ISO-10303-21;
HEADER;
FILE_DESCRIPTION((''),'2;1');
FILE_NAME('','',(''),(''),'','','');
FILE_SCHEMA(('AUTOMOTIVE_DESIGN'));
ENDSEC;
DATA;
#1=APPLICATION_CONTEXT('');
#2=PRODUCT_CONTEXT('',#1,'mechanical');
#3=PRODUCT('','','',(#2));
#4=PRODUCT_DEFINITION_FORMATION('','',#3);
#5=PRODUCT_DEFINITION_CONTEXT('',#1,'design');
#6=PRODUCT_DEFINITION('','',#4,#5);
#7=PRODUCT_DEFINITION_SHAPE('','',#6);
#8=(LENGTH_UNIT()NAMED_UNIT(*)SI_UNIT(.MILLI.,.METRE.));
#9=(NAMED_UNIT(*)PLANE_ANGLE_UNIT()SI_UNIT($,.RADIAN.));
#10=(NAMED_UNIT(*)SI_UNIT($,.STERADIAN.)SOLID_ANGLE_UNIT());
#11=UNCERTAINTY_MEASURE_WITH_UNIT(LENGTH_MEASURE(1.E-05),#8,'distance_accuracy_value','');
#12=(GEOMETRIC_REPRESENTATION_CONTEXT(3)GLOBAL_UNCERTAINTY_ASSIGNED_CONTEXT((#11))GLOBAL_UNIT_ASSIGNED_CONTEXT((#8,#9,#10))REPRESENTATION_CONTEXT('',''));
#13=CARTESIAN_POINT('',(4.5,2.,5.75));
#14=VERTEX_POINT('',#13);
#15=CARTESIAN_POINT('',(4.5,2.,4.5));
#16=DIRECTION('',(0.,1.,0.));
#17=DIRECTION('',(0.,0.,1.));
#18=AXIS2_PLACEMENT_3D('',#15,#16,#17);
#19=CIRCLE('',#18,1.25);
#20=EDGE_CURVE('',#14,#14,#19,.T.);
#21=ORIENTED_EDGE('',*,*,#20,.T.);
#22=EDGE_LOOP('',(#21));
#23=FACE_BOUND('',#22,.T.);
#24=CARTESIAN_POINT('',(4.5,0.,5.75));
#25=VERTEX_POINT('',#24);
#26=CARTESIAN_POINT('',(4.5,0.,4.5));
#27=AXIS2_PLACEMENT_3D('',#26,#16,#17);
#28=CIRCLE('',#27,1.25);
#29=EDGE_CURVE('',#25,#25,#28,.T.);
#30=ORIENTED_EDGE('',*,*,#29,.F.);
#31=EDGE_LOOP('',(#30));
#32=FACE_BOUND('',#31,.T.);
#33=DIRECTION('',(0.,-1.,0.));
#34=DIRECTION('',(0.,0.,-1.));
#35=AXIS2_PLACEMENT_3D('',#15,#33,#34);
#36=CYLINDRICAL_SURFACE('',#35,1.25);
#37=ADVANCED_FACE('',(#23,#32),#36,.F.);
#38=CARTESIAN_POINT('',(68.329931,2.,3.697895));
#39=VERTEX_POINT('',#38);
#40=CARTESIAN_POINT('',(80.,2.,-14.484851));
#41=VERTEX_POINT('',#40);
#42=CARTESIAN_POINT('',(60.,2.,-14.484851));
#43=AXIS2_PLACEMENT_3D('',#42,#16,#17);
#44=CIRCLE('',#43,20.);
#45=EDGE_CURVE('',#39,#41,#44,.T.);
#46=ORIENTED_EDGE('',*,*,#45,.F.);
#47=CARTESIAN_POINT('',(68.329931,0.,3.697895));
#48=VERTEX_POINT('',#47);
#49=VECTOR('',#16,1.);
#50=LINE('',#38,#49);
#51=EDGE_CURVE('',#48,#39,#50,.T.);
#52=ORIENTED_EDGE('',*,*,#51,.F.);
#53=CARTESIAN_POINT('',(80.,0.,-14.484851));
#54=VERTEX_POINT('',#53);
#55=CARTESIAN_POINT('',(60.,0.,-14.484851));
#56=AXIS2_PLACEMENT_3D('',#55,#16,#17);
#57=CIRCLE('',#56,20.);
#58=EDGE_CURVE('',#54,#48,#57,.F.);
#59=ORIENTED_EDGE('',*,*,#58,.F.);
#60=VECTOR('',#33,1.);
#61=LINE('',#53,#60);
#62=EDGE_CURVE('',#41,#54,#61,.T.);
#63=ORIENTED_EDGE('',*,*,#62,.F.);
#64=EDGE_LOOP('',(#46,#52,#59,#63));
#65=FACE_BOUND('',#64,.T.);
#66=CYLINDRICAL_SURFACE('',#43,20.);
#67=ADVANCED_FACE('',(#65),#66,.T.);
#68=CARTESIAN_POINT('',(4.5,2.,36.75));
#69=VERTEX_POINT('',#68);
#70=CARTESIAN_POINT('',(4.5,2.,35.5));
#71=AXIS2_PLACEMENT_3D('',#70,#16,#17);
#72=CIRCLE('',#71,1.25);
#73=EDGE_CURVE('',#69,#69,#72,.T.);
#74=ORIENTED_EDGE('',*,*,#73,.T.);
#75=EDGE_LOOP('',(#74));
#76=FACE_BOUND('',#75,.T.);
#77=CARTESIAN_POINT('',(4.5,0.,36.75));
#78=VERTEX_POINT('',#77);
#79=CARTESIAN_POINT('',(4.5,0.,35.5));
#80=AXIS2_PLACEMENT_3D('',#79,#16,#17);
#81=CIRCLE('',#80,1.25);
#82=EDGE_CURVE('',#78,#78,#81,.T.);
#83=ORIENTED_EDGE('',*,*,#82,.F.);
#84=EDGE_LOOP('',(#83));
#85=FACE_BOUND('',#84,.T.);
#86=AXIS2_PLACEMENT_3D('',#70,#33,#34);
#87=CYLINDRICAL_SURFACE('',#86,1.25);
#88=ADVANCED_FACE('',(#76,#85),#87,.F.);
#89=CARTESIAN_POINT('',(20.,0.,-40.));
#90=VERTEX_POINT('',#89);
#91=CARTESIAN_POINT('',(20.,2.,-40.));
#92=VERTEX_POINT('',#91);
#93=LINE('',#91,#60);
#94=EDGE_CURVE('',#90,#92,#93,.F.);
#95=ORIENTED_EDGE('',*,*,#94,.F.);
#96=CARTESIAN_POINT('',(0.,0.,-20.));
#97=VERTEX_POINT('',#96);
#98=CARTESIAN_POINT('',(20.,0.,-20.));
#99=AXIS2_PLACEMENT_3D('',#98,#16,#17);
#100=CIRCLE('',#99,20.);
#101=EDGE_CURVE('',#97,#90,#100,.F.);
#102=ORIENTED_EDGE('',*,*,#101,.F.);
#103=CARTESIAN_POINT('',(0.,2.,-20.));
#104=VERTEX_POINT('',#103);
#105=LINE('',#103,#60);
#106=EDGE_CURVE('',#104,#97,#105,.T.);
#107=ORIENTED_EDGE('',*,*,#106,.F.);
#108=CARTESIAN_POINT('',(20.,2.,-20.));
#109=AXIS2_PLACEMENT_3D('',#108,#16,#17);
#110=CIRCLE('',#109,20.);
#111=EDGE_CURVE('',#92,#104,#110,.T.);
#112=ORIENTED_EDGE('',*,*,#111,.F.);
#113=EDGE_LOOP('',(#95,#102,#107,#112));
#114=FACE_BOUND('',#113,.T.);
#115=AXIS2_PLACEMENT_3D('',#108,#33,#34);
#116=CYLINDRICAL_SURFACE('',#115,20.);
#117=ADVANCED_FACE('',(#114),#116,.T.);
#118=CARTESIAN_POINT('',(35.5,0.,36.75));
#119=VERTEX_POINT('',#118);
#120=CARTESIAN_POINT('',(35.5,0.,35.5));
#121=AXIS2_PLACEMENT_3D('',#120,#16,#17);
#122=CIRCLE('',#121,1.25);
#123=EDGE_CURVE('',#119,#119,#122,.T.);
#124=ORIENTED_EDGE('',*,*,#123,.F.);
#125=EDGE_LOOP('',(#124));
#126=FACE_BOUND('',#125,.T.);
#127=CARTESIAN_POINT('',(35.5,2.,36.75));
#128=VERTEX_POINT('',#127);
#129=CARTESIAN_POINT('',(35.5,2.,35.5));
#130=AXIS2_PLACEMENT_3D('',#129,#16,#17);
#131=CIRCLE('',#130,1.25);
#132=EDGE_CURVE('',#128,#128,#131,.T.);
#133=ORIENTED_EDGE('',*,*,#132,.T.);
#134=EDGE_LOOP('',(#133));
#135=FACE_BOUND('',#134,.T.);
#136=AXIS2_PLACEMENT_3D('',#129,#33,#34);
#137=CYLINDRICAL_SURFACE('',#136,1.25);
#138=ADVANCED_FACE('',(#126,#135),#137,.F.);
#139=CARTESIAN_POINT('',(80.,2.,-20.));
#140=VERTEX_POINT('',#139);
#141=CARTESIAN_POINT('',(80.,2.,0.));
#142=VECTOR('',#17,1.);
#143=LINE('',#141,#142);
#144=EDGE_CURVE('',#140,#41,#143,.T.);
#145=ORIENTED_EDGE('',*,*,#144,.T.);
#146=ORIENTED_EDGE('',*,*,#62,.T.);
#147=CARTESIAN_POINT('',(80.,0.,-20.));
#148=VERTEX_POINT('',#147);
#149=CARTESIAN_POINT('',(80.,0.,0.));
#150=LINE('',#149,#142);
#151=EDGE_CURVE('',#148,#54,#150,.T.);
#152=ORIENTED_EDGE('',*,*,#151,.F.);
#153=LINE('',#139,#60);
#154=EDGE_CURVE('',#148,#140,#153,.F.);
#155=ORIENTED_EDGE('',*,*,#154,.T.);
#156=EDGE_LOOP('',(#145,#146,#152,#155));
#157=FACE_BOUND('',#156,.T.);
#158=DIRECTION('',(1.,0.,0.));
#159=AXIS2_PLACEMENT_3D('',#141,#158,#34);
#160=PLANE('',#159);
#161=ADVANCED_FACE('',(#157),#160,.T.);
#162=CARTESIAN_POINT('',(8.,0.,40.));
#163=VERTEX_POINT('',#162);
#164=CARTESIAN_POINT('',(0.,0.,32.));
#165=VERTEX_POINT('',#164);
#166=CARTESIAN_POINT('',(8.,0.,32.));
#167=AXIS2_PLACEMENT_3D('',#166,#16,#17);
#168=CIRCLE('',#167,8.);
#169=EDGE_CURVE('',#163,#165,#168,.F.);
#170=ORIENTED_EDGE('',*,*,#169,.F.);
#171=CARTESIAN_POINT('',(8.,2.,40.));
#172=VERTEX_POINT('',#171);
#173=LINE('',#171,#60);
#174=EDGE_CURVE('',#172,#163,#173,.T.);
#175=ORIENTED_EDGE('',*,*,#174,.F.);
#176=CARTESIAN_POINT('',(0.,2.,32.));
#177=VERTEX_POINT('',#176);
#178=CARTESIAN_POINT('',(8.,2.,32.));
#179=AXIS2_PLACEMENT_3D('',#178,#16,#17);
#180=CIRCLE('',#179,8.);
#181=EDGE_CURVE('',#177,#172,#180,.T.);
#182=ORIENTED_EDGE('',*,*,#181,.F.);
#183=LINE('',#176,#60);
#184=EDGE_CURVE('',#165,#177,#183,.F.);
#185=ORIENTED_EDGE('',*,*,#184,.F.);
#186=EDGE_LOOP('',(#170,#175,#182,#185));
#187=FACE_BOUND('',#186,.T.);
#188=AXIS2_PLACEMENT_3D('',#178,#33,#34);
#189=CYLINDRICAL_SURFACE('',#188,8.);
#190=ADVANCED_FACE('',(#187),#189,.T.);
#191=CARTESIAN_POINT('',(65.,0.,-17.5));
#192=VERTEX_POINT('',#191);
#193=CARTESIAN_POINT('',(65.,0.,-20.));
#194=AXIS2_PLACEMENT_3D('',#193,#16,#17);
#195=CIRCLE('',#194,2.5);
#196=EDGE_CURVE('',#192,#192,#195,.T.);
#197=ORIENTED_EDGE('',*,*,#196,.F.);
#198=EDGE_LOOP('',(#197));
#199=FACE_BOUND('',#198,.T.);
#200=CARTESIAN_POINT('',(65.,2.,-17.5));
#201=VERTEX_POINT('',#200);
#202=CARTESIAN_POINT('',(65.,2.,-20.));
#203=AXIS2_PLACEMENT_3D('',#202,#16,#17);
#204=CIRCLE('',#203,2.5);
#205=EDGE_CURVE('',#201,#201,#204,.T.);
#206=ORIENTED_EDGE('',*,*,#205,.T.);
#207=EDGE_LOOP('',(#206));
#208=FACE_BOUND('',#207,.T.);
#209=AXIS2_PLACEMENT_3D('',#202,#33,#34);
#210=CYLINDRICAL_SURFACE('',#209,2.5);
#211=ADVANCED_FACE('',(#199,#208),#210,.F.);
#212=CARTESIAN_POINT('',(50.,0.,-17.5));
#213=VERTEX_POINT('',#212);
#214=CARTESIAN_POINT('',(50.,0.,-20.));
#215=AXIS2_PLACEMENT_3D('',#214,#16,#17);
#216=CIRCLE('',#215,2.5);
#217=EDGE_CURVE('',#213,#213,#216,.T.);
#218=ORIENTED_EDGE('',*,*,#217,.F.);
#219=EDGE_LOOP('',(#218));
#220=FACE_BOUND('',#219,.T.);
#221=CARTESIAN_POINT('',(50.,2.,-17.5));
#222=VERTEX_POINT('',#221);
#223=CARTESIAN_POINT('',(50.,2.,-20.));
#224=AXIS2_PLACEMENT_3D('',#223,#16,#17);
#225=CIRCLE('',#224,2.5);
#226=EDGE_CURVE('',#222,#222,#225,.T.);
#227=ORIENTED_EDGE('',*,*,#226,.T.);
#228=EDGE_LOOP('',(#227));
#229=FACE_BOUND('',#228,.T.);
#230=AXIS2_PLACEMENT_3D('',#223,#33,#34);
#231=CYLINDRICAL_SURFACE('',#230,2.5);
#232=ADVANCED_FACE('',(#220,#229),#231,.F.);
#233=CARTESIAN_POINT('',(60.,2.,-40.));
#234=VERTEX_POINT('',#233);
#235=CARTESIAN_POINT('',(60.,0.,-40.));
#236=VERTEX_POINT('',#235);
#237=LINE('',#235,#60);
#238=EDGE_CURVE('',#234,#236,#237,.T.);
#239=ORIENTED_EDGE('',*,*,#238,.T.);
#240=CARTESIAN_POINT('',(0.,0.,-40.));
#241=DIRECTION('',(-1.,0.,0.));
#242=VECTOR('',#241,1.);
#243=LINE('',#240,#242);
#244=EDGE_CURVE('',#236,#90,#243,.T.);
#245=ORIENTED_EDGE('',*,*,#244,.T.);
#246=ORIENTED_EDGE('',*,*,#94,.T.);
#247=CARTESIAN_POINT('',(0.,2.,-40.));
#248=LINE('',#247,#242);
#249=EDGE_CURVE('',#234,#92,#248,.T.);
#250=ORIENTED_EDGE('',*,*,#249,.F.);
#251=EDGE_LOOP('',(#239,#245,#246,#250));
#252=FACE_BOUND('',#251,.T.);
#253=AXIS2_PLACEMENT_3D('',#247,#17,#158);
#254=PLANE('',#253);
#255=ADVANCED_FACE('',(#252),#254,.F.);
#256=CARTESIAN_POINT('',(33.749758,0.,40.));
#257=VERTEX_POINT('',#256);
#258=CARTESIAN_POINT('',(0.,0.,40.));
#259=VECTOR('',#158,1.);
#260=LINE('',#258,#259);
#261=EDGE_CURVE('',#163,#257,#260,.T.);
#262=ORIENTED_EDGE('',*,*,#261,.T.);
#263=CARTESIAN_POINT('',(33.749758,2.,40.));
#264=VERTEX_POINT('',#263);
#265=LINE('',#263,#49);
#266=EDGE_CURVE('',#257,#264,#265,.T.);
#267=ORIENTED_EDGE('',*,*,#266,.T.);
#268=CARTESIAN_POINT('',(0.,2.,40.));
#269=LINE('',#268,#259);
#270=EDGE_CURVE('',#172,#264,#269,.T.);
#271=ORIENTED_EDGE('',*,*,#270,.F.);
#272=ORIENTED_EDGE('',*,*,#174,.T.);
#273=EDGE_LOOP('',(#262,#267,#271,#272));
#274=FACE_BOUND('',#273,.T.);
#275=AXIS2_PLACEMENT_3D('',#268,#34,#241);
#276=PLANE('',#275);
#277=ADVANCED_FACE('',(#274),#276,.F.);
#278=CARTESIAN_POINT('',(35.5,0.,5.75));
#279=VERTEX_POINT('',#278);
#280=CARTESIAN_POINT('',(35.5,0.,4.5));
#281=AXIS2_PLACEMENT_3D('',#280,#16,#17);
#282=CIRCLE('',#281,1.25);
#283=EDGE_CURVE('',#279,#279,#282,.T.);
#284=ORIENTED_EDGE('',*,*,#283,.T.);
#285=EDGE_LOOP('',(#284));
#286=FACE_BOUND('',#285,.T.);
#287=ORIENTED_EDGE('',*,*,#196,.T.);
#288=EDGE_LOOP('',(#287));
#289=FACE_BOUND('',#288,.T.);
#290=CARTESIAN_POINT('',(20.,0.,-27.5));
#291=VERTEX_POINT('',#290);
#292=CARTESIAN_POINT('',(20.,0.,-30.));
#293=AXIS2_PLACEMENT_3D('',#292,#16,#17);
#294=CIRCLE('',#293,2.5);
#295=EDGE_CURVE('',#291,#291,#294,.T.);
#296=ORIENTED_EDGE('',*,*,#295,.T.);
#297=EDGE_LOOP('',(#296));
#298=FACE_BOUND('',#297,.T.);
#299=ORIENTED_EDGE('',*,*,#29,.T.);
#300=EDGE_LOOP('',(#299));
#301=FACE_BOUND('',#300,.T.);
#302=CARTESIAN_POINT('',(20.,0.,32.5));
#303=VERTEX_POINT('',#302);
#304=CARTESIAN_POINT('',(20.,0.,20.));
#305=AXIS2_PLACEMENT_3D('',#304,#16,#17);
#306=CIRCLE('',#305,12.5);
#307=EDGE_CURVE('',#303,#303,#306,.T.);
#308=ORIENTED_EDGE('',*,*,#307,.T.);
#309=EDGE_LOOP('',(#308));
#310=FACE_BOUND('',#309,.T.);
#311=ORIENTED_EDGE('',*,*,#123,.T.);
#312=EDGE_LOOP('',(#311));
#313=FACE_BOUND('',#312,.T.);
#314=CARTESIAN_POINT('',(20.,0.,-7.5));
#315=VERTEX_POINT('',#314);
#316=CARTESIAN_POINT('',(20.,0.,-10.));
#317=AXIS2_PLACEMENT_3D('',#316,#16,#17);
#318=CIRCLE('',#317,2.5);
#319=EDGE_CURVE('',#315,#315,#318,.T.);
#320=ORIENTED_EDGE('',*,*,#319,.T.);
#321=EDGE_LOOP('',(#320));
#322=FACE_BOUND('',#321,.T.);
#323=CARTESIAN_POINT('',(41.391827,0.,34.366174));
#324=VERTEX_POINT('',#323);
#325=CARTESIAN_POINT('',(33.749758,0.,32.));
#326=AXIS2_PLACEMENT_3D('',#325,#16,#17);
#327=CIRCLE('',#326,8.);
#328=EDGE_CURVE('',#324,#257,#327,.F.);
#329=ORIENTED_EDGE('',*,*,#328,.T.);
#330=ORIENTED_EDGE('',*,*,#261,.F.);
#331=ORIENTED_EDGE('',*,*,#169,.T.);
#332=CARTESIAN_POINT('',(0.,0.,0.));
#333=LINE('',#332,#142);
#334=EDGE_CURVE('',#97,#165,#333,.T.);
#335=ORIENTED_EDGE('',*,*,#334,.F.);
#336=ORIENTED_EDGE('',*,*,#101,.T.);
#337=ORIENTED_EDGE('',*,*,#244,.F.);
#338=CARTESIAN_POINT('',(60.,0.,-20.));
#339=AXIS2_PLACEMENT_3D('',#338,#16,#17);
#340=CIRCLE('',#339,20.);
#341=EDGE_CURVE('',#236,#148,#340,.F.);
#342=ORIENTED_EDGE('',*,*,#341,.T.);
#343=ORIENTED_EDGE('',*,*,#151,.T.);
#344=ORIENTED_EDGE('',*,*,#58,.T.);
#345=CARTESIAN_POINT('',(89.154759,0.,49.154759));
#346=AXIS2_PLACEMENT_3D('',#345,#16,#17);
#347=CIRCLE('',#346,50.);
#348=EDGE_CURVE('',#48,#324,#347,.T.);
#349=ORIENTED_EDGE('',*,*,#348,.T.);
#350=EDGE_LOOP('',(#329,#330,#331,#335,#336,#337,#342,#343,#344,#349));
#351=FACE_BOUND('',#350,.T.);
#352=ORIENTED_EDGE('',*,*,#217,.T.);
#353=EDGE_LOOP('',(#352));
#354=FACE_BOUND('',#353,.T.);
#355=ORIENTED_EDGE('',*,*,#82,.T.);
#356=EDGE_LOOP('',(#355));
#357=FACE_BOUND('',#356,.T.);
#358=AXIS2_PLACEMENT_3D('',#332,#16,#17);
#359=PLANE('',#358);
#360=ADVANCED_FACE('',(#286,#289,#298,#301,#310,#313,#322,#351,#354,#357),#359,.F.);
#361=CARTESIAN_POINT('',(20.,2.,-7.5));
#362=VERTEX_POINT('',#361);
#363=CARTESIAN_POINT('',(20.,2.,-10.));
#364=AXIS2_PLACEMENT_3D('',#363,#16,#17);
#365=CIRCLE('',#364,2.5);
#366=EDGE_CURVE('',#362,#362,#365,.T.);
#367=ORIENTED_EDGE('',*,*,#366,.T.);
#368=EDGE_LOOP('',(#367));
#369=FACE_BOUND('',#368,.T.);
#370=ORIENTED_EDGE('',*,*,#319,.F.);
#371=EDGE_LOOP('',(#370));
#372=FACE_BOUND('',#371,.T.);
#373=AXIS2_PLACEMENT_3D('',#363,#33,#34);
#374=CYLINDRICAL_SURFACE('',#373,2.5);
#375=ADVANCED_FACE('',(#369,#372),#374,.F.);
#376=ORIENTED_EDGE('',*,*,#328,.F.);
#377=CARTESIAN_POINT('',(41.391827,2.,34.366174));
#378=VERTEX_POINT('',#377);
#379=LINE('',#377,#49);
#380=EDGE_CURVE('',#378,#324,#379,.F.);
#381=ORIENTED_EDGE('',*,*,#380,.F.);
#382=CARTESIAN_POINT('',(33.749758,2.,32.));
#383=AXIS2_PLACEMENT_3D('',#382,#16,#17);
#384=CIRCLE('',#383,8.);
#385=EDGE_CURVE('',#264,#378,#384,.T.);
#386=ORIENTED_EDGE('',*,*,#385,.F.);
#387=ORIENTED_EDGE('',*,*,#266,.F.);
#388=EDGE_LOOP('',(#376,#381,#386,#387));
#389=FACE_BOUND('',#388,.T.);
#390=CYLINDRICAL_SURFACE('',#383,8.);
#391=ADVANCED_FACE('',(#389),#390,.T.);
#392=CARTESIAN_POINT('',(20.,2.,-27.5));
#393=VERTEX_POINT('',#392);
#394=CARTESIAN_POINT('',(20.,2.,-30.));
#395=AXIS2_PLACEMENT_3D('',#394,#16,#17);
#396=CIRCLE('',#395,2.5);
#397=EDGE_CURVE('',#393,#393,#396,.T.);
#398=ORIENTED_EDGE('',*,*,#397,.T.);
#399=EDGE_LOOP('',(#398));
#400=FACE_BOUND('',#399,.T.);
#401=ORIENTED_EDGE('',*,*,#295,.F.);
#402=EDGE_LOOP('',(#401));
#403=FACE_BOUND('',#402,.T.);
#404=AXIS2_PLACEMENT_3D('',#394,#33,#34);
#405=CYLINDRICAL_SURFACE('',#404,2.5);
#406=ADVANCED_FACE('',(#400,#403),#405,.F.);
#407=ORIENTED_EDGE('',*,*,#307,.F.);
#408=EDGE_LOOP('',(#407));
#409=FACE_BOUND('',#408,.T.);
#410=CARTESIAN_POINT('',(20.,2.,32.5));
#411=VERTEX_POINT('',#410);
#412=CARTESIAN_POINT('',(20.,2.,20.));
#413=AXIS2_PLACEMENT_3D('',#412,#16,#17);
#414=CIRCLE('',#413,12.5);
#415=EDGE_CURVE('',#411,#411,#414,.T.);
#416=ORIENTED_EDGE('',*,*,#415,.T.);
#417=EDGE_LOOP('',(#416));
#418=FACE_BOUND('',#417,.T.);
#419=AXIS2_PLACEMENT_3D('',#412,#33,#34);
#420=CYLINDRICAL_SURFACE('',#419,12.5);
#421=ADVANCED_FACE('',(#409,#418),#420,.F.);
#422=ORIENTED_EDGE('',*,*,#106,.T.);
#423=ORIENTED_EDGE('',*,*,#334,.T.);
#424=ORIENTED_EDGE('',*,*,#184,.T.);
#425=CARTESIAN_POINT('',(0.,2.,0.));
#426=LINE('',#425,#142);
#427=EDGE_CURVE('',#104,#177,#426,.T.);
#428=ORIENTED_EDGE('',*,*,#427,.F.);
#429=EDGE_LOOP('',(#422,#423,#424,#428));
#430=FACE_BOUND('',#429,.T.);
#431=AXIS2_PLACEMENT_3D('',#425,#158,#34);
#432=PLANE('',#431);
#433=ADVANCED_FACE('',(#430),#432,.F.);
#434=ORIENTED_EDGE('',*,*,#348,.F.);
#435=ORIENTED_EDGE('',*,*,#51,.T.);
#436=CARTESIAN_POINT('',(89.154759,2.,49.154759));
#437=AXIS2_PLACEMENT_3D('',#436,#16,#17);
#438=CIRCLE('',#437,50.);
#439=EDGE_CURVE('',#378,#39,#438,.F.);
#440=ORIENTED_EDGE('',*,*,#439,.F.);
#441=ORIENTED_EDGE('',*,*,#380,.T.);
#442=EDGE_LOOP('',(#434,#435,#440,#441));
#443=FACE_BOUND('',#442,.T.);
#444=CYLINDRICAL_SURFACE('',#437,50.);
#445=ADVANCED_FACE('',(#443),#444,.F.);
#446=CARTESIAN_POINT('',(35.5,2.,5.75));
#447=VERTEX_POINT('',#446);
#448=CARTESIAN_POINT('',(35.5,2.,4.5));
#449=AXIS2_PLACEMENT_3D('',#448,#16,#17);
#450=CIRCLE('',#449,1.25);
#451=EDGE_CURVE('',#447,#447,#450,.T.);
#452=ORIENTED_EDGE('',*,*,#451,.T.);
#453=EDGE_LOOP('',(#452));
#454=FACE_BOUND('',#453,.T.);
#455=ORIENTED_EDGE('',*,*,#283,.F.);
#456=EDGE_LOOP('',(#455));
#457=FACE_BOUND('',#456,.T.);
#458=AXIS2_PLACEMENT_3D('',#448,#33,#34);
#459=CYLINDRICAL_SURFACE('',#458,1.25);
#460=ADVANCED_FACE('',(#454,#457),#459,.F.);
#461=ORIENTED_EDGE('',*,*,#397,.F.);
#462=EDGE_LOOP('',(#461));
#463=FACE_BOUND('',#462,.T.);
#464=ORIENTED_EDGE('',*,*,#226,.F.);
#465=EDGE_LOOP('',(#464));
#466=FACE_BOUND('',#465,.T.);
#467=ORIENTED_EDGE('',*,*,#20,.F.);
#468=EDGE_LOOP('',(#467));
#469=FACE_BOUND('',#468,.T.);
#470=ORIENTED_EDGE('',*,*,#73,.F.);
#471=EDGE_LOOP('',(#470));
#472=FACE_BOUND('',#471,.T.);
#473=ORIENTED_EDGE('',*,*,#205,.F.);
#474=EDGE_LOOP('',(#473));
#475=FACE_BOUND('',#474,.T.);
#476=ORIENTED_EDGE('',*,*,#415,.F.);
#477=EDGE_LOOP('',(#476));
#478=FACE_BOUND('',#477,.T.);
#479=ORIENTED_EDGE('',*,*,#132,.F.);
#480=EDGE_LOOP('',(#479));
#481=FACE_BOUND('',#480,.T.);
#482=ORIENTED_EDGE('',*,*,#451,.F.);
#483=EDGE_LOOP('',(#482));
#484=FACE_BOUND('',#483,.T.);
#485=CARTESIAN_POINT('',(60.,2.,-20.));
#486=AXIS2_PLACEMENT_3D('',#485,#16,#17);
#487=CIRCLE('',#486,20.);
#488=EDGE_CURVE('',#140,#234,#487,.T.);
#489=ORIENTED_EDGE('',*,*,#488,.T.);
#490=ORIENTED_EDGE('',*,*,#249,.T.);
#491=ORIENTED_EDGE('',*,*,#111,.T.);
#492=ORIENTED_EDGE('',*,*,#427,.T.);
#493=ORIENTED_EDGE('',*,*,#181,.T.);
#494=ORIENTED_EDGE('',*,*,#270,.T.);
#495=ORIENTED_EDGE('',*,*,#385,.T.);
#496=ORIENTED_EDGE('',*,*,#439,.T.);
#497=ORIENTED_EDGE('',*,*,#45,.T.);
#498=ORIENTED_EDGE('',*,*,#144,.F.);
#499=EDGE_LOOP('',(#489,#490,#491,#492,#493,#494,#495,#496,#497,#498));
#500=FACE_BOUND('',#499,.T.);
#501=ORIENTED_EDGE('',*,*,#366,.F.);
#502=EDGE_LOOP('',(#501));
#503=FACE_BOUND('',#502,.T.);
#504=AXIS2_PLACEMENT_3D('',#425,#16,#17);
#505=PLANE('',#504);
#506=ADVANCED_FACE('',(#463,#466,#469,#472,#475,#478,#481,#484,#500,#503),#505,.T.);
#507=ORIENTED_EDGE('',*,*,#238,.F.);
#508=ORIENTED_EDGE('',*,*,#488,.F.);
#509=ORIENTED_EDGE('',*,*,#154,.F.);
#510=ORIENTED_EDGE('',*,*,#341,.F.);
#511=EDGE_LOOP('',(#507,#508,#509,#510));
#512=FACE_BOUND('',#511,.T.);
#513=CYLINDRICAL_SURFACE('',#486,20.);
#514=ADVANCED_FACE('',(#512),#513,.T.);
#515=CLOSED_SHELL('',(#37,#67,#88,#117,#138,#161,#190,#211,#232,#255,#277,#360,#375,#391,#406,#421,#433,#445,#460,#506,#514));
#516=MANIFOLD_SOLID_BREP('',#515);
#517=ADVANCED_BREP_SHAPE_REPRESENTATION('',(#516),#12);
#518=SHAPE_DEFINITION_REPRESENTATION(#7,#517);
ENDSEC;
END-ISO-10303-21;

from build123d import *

# Parameters (mm, degrees)
SKETCH1_R           = 2.5
SKETCH1_W           = 40
SKETCH1_H           = 40
SKETCH1_R_2         = 1.25
SKETCH1_R_3         = 12.5
BOSS_EXTRUDE1_DEPTH = 2
FILLET1_R           = 50
FILLET2_R           = 20
FILLET3_R           = 8


with BuildPart() as part:
    # Sketch1 → Boss-Extrude1 (new body)
    # profile 1 of 2: a face of its own
    with BuildSketch(Plane(origin=(0, 0, 0), x_dir=(1, 0, 0), z_dir=(0, 1, 0))):
        Polygon((80, 0), (80, 40), (0, 40), (0, 0), (40, 0), align=None)
        with Locations(Location((20, 10, 0), (0, 0, 270))):
            Circle(SKETCH1_R, mode=Mode.SUBTRACT)
        with Locations(Location((20, 30, 0), (0, 0, 270))):
            Circle(SKETCH1_R, mode=Mode.SUBTRACT)
        with Locations(Location((50, 20, 0), (0, 0, 270))):
            Circle(SKETCH1_R, mode=Mode.SUBTRACT)
        with Locations(Location((65, 20, 0), (0, 0, 270))):
            Circle(SKETCH1_R, mode=Mode.SUBTRACT)
    # profile 2 of 2: a face of its own
    with BuildSketch(Plane(origin=(0, 0, 0), x_dir=(1, 0, 0), z_dir=(0, 1, 0))):
        with Locations((20, -20)):
            Rectangle(SKETCH1_W, SKETCH1_H)
        with Locations(Location((4.5, -35.5, 0), (0, 0, 270))):
            Circle(SKETCH1_R_2, mode=Mode.SUBTRACT)
        with Locations(Location((35.5, -35.5, 0), (0, 0, 270))):
            Circle(SKETCH1_R_2, mode=Mode.SUBTRACT)
        with Locations(Location((20, -20, 0), (0, 0, 270))):
            Circle(SKETCH1_R_3, mode=Mode.SUBTRACT)
        with Locations(Location((4.5, -4.5, 0), (0, 0, 270))):
            Circle(SKETCH1_R_2, mode=Mode.SUBTRACT)
        with Locations(Location((35.5, -4.5, 0), (0, 0, 270))):
            Circle(SKETCH1_R_2, mode=Mode.SUBTRACT)
    extrude(amount=BOSS_EXTRUDE1_DEPTH)

    # Fillet1
    # the kernel refuses this fillet: 50 mm, written as the material it adds along each edge
    with BuildSketch(Plane(origin=(40, 0, 0), x_dir=(0, 0, 1), z_dir=(0, 1, 0))) as fillet1_piece_1:
        with BuildLine():
            CenterArc((49.154759474, 49.154759474), FILLET1_R, 190.550098012, 68.899803976)
            Line((0, 40), (0, 0))
            Line((0, 0), (40, 0))
        make_face()
    extrude(amount=2)

    # Fillet2
    fillet2_edges = [part.edges().sort_by_distance(p)[0] for p in [
        (80, 1, -40),
        (80, 1, 0),
        (0, 1, -40),
    ]]
    fillet(fillet2_edges, radius=FILLET2_R)

    # Fillet3
    fillet3_edges = [part.edges().sort_by_distance(p)[0] for p in [
        (40, 1, 40),
        (0, 1, 40),
    ]]
    fillet(fillet3_edges, radius=FILLET3_R)


solid = part.part
